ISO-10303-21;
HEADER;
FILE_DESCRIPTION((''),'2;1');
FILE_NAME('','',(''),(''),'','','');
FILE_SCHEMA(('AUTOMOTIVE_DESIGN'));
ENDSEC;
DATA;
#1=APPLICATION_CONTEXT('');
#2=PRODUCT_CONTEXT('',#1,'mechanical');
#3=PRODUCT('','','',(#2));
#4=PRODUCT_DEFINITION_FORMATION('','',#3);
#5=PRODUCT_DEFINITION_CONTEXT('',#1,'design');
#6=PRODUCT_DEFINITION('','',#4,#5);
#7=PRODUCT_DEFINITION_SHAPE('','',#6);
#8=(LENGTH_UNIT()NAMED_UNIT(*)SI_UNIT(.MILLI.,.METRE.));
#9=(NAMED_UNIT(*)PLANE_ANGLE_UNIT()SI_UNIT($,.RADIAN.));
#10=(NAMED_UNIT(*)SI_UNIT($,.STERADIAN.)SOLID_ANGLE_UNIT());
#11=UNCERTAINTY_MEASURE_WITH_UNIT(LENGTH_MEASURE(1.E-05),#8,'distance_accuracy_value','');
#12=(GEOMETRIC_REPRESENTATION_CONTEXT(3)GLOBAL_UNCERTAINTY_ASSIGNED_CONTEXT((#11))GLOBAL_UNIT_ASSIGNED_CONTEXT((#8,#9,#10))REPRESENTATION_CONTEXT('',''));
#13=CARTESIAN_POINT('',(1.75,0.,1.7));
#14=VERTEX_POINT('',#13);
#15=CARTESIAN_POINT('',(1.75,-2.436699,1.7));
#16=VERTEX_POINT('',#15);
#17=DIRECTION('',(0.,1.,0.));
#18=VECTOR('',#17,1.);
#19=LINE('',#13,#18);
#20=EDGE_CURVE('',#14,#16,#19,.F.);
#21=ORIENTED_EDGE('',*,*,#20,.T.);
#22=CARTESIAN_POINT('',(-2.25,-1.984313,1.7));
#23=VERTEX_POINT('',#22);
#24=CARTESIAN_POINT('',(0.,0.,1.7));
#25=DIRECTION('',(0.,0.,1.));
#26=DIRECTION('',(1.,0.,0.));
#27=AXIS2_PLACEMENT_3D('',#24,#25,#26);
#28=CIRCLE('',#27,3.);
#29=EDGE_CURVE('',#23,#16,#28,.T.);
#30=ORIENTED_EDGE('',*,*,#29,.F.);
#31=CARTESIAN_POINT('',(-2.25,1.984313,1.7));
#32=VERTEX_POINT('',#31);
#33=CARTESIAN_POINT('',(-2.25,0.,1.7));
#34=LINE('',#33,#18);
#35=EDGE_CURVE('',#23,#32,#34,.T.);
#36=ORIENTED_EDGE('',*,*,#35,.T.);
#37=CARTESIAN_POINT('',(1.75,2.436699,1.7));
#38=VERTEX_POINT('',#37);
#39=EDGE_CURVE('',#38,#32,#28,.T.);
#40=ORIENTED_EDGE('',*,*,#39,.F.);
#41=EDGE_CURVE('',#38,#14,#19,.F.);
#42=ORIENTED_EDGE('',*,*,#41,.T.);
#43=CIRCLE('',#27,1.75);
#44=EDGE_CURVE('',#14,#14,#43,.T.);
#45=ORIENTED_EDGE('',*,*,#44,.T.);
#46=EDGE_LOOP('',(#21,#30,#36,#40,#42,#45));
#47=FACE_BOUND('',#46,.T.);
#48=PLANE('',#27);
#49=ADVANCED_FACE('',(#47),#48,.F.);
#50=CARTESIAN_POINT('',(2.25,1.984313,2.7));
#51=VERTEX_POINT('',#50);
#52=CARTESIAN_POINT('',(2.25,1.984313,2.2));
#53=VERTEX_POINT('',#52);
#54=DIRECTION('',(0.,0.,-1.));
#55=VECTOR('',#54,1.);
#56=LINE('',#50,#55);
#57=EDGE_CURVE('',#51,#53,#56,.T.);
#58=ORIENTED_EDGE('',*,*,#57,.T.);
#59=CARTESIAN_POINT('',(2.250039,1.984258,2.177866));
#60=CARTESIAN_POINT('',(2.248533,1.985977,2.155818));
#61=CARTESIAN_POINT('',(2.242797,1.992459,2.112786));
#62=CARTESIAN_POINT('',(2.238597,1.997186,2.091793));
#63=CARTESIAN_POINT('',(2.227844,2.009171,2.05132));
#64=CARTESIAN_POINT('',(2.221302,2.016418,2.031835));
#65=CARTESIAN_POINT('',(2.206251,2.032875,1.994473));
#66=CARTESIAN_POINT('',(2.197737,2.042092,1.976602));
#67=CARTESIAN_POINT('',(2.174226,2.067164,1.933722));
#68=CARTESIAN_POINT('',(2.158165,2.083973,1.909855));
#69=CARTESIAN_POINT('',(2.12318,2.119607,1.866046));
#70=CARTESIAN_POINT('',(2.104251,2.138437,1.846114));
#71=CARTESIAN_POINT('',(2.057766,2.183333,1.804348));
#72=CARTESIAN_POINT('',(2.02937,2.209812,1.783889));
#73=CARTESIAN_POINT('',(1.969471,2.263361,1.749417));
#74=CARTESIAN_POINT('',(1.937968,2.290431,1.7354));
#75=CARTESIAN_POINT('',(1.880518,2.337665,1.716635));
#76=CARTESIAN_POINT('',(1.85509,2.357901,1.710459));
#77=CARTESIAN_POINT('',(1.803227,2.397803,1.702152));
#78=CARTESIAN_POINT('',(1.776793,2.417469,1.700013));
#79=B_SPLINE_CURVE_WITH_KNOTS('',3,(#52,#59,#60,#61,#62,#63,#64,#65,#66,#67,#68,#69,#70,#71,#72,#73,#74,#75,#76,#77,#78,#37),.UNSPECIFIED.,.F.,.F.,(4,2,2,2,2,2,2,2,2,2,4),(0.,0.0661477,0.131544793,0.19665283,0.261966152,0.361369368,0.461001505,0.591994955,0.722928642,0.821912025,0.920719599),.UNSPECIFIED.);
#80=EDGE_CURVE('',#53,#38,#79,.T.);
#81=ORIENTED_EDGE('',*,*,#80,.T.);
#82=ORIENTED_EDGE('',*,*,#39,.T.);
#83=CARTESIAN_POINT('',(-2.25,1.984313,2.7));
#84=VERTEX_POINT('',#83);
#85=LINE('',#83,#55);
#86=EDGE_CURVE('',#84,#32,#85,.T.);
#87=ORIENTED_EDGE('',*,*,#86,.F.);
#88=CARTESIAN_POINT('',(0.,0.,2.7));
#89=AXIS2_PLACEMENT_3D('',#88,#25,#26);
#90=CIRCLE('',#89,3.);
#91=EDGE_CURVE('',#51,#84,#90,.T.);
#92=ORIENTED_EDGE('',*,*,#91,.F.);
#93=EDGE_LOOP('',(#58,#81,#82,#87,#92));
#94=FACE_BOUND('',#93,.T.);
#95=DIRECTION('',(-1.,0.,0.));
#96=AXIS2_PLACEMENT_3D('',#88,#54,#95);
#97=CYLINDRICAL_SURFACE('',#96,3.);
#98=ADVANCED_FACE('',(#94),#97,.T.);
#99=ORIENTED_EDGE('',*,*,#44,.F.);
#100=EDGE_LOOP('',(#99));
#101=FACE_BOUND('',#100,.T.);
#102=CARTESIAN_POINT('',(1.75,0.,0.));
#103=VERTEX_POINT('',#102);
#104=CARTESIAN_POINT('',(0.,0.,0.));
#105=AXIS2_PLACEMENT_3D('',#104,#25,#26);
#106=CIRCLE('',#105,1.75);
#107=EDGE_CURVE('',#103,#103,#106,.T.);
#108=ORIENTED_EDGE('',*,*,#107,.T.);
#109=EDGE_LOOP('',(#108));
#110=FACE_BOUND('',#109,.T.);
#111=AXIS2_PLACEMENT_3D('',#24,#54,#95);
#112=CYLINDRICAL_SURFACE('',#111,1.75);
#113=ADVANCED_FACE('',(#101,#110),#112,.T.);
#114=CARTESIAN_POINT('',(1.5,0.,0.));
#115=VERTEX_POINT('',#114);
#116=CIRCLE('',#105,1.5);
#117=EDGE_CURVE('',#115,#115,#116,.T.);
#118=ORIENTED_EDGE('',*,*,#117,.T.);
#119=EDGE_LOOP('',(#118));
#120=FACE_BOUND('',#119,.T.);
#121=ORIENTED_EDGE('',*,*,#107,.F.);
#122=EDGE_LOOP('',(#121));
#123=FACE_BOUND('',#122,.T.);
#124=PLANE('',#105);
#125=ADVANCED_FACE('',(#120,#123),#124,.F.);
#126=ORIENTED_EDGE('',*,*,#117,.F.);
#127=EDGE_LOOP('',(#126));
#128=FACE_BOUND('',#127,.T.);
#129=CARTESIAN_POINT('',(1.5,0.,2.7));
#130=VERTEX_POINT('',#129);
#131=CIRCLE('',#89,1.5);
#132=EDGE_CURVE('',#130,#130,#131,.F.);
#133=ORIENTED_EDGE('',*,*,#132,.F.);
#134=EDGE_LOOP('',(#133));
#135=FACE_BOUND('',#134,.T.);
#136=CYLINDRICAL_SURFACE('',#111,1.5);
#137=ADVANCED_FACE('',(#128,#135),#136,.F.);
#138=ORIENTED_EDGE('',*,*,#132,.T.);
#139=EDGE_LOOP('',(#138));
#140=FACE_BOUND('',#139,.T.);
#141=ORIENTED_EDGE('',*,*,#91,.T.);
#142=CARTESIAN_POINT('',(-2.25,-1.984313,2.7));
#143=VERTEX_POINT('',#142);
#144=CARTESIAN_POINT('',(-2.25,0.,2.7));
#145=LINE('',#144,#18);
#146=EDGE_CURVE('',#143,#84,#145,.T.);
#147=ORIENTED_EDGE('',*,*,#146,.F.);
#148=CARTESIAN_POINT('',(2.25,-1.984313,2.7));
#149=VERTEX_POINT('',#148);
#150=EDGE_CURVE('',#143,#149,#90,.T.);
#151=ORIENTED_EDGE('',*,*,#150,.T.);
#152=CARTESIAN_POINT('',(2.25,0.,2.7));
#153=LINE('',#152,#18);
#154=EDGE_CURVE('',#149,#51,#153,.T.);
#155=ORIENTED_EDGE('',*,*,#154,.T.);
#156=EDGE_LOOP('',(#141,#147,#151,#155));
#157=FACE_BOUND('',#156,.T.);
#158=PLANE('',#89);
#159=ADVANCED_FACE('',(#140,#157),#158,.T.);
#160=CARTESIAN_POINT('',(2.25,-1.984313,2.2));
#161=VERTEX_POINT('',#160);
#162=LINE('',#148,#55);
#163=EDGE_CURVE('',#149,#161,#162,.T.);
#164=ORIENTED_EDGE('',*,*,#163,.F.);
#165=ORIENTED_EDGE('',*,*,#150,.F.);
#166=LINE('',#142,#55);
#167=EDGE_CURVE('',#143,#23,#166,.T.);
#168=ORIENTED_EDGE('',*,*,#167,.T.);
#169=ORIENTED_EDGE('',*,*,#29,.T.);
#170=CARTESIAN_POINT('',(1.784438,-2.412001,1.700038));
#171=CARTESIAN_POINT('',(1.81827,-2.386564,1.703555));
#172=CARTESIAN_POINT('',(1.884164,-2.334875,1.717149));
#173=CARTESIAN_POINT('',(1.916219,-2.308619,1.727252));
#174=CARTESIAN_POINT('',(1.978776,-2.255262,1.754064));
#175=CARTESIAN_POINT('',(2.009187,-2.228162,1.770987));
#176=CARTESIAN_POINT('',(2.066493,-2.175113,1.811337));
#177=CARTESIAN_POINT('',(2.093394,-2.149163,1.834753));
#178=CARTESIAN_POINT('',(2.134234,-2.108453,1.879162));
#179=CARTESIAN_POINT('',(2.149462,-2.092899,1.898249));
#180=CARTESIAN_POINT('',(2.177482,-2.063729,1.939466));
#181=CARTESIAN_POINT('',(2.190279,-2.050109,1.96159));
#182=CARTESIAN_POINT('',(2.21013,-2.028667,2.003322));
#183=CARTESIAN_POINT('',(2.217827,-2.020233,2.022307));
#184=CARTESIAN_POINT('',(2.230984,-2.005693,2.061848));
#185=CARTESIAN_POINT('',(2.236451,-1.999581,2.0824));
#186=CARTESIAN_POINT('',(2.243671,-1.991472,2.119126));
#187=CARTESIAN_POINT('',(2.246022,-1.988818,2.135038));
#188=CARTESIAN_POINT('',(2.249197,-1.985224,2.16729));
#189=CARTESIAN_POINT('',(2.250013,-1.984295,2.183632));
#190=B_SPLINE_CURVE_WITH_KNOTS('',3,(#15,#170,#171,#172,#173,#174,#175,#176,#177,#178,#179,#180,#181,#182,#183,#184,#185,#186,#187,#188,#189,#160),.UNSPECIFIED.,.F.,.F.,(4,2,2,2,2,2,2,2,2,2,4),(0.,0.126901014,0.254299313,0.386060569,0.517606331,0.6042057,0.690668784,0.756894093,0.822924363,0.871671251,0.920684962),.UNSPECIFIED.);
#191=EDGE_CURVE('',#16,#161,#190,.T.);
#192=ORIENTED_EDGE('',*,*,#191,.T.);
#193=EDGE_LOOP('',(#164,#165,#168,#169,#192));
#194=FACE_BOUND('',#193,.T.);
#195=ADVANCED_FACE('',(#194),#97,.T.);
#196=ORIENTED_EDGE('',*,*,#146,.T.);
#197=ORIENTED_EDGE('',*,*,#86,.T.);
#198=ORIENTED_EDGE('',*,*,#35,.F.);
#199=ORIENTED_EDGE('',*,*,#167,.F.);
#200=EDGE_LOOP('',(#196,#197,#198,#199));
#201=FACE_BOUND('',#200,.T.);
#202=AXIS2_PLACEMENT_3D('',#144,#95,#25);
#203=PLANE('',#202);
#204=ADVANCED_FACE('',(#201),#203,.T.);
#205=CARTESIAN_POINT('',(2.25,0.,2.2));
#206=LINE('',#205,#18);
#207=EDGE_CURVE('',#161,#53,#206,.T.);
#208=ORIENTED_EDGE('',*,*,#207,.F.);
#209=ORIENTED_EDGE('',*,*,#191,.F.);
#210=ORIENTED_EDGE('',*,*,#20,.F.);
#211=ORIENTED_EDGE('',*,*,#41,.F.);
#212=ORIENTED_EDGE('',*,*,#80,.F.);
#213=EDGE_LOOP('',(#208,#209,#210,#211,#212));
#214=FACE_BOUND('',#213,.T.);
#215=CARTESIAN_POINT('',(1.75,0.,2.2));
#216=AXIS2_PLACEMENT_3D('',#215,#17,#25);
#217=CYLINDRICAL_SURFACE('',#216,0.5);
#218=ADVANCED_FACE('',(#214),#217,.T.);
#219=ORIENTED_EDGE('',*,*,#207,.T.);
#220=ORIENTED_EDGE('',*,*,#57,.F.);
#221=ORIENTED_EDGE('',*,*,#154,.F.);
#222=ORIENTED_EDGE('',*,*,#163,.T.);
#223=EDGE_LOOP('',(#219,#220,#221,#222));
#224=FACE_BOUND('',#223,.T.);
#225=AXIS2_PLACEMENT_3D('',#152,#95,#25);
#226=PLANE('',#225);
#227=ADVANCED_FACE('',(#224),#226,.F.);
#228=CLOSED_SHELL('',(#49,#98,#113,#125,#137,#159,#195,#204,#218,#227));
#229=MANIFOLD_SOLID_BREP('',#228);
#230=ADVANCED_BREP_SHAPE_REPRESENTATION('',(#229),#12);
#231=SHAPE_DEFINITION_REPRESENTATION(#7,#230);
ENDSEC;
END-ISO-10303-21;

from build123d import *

# Parameters (mm, degrees)
SKETCH_1_R      = 1.75
SKETCH_1_R_2    = 1.5
EXTRUDE_1_DEPTH = 1.7
SKETCH_2_R      = 1.75
SKETCH_2_R_2    = 1.5
EXTRUDE_2_DEPTH = 1
FILLET_1_R      = 0.5


with BuildPart() as part:
    # 草图1 → 凸台-拉伸1 (new body)
    with BuildSketch(Plane.XY):
        Circle(SKETCH_1_R)
        Circle(SKETCH_1_R_2, mode=Mode.SUBTRACT)
    extrude(amount=EXTRUDE_1_DEPTH)

    # 草图2 → 凸台-拉伸2 (add)
    # profile 1 of 2: a face of its own
    with BuildSketch(Plane.XY.offset(1.7)):
        with BuildLine():
            ThreePointArc((-2.25, -1.984313483), (-1.234313483, -2.734313483), (0, -3))
            ThreePointArc((0, -3), (1.234313483, -2.734313483), (2.25, -1.984313483))
            Line((2.25, -1.984313483), (2.25, 1.984313483))
            ThreePointArc((2.25, 1.984313483), (1.234313483, 2.734313483), (0, 3))
            ThreePointArc((0, 3), (-1.234313483, 2.734313483), (-2.25, 1.984313483))
            Line((-2.25, 1.984313483), (-2.25, -1.984313483))
        make_face()
        Circle(SKETCH_2_R, mode=Mode.SUBTRACT)
    # profile 2 of 2: a face of its own
    with BuildSketch(Plane.XY.offset(1.7)):
        Circle(SKETCH_2_R)
        Circle(SKETCH_2_R_2, mode=Mode.SUBTRACT)
    extrude(amount=EXTRUDE_2_DEPTH)

    # 圆角1
    fillet_1_edges = [part.edges().sort_by_distance(p)[0] for p in [
        (2.25, 0, 1.7),
    ]]
    fillet(fillet_1_edges, radius=FILLET_1_R - 0.0001)  # a hair under: the kernel refuses the full size


solid = part.part
